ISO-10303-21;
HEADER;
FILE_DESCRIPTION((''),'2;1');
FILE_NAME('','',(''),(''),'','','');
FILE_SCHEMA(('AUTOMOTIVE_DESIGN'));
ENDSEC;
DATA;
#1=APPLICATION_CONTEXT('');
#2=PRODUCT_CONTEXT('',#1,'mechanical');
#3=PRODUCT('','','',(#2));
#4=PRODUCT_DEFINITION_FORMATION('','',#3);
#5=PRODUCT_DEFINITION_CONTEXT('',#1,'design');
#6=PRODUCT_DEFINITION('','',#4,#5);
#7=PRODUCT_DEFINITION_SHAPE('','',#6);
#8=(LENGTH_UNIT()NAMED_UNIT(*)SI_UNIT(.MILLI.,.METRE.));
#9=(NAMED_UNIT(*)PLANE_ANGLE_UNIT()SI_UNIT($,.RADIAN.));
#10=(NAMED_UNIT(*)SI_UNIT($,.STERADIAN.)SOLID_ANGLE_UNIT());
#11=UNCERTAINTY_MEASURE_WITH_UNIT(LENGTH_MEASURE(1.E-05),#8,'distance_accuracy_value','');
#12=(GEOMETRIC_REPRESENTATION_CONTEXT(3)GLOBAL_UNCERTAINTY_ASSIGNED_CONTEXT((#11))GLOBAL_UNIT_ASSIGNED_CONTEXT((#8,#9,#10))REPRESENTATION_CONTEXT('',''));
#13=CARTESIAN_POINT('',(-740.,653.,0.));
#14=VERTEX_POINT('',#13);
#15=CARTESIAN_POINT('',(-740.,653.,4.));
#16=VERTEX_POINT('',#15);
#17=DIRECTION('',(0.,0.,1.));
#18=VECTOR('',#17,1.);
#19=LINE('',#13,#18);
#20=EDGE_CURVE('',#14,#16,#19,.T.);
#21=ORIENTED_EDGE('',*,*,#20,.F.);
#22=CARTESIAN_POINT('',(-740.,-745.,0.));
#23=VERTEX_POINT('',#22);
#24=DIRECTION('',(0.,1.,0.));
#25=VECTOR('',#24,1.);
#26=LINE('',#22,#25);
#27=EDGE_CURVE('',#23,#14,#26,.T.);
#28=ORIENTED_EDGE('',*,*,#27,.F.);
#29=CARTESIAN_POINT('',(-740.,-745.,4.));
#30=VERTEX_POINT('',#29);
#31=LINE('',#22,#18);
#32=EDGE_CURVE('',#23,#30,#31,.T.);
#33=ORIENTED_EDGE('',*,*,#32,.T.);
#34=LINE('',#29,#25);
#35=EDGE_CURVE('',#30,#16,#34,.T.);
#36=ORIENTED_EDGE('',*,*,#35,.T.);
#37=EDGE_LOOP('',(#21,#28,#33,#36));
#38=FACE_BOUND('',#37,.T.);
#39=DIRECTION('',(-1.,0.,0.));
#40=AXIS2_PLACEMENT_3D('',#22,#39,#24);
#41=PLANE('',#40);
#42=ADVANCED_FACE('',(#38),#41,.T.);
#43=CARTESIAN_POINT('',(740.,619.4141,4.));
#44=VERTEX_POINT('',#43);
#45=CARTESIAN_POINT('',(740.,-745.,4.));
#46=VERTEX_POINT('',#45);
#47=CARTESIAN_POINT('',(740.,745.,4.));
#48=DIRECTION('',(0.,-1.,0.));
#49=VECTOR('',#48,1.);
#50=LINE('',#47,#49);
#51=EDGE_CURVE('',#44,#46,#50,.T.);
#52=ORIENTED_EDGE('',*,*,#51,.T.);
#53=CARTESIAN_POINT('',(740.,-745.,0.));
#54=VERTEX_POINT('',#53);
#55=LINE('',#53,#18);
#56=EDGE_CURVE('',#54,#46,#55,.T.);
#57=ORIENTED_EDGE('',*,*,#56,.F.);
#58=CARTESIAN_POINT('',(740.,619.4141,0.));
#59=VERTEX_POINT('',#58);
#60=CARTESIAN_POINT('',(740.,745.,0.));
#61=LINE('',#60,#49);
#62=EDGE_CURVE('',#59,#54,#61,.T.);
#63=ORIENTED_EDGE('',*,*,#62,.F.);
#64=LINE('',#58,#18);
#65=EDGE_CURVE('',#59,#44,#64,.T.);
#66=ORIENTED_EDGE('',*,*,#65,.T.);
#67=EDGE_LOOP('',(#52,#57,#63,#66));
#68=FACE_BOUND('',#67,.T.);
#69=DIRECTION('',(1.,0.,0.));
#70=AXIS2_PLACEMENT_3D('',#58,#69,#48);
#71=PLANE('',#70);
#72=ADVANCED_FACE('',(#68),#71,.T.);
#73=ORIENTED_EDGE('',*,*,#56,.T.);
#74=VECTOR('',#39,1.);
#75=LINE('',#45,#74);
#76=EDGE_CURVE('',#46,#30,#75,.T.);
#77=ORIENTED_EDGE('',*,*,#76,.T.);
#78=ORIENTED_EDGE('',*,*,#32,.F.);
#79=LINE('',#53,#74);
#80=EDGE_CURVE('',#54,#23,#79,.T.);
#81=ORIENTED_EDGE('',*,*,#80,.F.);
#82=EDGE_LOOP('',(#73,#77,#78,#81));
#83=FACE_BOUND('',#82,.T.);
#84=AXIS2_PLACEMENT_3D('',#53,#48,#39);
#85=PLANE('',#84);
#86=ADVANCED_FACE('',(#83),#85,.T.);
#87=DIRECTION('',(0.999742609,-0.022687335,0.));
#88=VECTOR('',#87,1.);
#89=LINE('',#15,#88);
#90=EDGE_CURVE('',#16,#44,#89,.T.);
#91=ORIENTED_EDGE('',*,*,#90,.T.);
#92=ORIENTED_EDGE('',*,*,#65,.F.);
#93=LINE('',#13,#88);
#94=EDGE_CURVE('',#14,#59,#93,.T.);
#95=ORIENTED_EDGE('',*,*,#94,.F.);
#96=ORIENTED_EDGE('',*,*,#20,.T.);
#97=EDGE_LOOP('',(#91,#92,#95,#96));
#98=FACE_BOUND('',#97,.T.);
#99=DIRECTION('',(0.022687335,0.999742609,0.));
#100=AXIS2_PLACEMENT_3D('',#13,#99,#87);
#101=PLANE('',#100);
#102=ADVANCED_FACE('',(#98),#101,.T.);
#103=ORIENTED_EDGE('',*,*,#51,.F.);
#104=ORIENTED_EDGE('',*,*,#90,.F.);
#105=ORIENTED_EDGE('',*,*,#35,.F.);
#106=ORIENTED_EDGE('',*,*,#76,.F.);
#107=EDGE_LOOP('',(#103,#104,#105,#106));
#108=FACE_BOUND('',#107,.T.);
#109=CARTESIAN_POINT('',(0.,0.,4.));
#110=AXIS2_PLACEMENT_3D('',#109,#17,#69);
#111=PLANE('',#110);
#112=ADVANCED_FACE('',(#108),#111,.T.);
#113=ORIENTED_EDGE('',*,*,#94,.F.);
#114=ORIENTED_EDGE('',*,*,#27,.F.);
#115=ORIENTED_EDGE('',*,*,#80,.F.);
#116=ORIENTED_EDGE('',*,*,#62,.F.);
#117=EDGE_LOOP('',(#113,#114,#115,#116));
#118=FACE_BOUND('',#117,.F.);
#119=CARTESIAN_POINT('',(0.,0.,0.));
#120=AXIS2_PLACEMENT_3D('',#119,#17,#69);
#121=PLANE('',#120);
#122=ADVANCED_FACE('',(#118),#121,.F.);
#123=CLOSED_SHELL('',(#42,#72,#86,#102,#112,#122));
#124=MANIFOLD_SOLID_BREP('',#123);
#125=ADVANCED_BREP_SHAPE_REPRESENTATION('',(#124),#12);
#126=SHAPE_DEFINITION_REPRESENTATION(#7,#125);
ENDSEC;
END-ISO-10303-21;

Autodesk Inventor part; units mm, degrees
ref_plane "YZ Plane" through (0, 0, 0) normal (1, 0, 0) x (0, 1, 0)
ref_plane "XZ Plane" through (0, 0, 0) normal (0, 1, 0) x (-1, 0, 0)
ref_plane "XY Plane" through (0, 0, 0) normal (0, 0, 1) x (1, 0, 0)
sketch "Sketch1" plane through (0, 0, 0) normal (0, 0, 1) x (1, 0, 0)
  line L0 (740, -745) -> (-740, -745)
  line L1 (-740, -745) -> (-740, 745)
  line L2 (-740, 745) -> (740, 745)
  line L3 (740, 745) -> (740, -745)
  line L4 (740, -745) -> (-740, 745) construction
  line L5 (-740, -745) -> (740, 745) construction
  line L6 (-740, 653) -> (740, 619.4141)
  point P0 (0, 0)
  dimension "d0" = 1480
  dimension "d1" = 1490
  dimension "d3" = 1.3
  dimension "d4" = 92
extrude "Plate1" add sketch "Sketch1" along normal blind 4 contours L0 L1 L6 L3
sketch "Эскиз4" plane through (0, 0, 0) normal (0, 0, -1) x (-1, 0, 0)
  line L0 (549.4783, -556.3714) -> (549.4783, -1054.5075) construction
  line L1 (549.4783, -1054.5075) -> (509.8511, -1054.5075) construction
  line L2 (509.8511, -1054.5075) -> (509.8511, -556.3714) construction
  line L3 (509.8511, -556.3714) -> (549.4783, -556.3714) construction
  line L4 (669.2463, -493) -> (669.2463, -590) projected
  line L5 (669.2463, -590) -> (665.2463, -590) projected
  line L6 (169.3732, -493) -> (169.3732, -590) projected
  line L7 (169.3732, -590) -> (165.3732, -590) projected
  line L8 (-330.5, -493) -> (-330.5, -590) projected
  line L9 (-330.5, -590) -> (-334.5, -590) projected
  line L10 (-330.5, 715) -> (-330.5, 775) projected
  line L11 (-330.5, 715) -> (-334.5, 715) projected
  line L12 (169.3732, 715) -> (169.3732, 775) projected
  line L13 (169.3732, 715) -> (165.3732, 715) projected
  line L14 (669.2463, 715) -> (669.2463, 775) projected
  line L15 (669.2463, 715) -> (665.2463, 715) projected
  line L16 (709.6246, -489.5) -> (769.6246, -489.5) projected
  line L17 (709.6246, -489.5) -> (709.6246, -485.5) projected
  line L18 (709.6246, 7.1667) -> (769.6246, 7.1667) projected
  line L19 (709.6246, 7.1667) -> (709.6246, 11.1667) projected
  line L20 (709.6246, 503.8333) -> (769.6246, 503.8333) projected
  line L21 (709.6246, 503.8333) -> (709.6246, 507.8333) projected
  line L22 (-740, -489.5) -> (-710, -489.5) projected
  line L23 (-710, -489.5) -> (-710, -485.5) projected
  line L24 (-740, 7.1667) -> (-710, 7.1667) projected
  line L25 (-710, 7.1667) -> (-710, 11.1667) projected
  line L26 (-740, 503.8333) -> (-710, 503.8333) projected
  line L27 (-710, 503.8333) -> (-710, 507.8333) projected
  point P0 (0, 0)
mark "Маркировка3"
equation "\"d0\" = Лист_ширина"
equation "\"d1\" = 0.5 * Лист_длина"
equation "\"d2\" = Thickness"
equation "\"BendRadius\" = Thickness"
equation "\"BendReliefWidth\" = Thickness"
equation "\"BendReliefDepth\" = 0.5 * Thickness"
equation "\"CornerReliefSize\" = 4 * Thickness"
equation "\"MinimumRemnant\" = 2 * Thickness"
equation "\"TransitionRadius\" = BendRadius"
equation "\"JacobiRadiusSize\" = BendRadius"
equation "\"GapSize\" = Thickness"
equation "\"Лист_ширина\" = 1480"
equation "\"Лист_длина\" = 2980"
equation "\"Thickness\" = 4"
properties part number "GBK 3133 shield 3" material "Steel"
